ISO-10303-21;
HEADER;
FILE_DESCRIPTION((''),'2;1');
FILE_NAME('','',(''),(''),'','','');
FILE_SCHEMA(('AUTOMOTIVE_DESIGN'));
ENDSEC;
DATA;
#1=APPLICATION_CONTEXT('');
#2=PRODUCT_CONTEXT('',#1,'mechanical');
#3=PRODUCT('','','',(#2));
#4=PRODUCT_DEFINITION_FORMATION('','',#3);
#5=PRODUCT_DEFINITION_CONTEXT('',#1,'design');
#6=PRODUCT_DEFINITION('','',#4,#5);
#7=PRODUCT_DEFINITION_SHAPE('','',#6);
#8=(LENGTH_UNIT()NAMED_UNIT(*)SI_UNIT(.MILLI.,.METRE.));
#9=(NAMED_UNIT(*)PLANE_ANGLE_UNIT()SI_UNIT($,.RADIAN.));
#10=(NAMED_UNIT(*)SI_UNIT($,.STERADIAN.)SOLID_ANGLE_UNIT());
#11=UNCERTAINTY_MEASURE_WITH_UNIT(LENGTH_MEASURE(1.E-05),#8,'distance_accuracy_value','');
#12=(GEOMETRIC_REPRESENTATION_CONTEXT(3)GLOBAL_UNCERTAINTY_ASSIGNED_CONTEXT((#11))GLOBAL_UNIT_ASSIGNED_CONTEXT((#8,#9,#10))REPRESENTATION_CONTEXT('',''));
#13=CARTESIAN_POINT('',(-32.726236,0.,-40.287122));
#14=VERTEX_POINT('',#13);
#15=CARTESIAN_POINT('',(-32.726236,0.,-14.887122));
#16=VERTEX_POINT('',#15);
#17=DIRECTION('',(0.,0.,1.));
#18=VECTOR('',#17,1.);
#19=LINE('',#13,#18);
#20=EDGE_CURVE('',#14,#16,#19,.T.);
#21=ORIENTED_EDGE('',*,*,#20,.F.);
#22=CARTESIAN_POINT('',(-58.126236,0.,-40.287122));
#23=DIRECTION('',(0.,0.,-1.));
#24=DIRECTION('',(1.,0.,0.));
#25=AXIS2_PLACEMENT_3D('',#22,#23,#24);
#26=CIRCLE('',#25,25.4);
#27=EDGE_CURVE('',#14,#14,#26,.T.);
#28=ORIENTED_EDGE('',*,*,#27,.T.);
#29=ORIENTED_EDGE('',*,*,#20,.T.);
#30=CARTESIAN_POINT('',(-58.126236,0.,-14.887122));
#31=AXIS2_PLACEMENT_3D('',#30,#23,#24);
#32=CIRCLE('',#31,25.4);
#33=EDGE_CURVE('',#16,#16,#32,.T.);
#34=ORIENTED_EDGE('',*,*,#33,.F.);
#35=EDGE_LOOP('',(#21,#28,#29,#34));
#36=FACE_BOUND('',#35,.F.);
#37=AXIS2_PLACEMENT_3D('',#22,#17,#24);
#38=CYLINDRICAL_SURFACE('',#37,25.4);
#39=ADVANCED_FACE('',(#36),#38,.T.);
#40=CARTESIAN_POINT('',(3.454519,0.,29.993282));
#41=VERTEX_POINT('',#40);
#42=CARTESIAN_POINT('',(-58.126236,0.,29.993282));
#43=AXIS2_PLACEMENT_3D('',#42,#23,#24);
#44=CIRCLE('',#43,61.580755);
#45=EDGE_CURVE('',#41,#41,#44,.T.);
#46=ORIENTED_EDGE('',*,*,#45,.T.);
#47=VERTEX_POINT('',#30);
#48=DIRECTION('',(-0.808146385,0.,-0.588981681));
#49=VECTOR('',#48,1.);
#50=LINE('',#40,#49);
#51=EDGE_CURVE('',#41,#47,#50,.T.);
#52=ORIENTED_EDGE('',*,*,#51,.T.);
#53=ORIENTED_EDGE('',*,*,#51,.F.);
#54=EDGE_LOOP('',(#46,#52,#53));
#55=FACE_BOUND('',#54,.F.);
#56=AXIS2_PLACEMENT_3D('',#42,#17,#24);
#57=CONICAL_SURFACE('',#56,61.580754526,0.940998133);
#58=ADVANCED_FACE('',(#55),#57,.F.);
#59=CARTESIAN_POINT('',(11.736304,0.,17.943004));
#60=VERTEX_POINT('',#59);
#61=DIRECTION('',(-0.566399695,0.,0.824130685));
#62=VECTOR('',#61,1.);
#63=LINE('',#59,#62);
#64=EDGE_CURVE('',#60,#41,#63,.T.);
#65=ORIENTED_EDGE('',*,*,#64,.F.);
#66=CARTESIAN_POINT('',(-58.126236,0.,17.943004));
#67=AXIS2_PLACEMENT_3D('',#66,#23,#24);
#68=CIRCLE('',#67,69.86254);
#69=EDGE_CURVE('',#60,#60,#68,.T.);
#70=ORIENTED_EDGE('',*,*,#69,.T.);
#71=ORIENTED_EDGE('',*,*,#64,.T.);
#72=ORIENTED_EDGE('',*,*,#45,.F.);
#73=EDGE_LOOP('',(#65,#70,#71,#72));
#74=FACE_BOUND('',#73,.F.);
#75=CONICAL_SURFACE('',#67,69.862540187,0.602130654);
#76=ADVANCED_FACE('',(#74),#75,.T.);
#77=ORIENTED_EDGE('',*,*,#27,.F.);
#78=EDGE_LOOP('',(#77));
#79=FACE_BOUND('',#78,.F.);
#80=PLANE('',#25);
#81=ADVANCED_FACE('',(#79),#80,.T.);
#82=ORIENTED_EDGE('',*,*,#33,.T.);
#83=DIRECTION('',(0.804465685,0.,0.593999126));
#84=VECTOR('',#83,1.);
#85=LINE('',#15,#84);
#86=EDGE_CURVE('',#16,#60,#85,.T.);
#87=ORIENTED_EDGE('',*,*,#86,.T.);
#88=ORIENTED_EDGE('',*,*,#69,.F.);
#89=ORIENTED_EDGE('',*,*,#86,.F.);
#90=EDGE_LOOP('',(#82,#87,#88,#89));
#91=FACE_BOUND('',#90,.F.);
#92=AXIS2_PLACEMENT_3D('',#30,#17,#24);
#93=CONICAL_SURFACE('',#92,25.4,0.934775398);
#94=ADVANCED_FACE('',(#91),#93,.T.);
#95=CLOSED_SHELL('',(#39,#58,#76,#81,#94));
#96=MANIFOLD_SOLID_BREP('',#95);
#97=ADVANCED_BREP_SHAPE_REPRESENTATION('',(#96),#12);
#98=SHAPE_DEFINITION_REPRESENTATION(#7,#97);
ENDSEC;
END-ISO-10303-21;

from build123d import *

# Parameters (mm, degrees)
F2_R     = 25.4
F3_DEPTH = 25.4
F4_DEPTH = 76.2


with BuildPart() as f1:
    # F0 (on Front) → F1 (revolve)
    with BuildSketch(Plane.XZ):
        Polygon((-58.1262356877, -14.8871221304), (-58.1262356877, -40.2871221304), (-32.7262356877, -40.2871221304), (-32.7262356877, -14.8871221304), (11.7363044992, 17.9430041462), (3.4545188379, 29.9932819682), align=None)
    revolve(axis=Axis((-58.1262356877, 0, -27.5871221304), (0, 0, -1)))


with BuildPart() as f3:
    # F2 (on face) → F3 (new body)
    with BuildSketch(Plane(origin=(0, 0, -40.2871221304), x_dir=(1, 0, 0), z_dir=(0, 0, -1))):
        with Locations((-58.1262356877, 0)):
            Circle(F2_R)
    extrude(amount=F3_DEPTH)

    # F4 (cut): a face of the model
    f4_faces = [f3.faces().sort_by_distance(p)[0] for p in [
        (-58.1262356877, 0, -65.6871221304),
    ]]
    extrude(f4_faces, amount=-F4_DEPTH, mode=Mode.SUBTRACT)


solid = f1.part
